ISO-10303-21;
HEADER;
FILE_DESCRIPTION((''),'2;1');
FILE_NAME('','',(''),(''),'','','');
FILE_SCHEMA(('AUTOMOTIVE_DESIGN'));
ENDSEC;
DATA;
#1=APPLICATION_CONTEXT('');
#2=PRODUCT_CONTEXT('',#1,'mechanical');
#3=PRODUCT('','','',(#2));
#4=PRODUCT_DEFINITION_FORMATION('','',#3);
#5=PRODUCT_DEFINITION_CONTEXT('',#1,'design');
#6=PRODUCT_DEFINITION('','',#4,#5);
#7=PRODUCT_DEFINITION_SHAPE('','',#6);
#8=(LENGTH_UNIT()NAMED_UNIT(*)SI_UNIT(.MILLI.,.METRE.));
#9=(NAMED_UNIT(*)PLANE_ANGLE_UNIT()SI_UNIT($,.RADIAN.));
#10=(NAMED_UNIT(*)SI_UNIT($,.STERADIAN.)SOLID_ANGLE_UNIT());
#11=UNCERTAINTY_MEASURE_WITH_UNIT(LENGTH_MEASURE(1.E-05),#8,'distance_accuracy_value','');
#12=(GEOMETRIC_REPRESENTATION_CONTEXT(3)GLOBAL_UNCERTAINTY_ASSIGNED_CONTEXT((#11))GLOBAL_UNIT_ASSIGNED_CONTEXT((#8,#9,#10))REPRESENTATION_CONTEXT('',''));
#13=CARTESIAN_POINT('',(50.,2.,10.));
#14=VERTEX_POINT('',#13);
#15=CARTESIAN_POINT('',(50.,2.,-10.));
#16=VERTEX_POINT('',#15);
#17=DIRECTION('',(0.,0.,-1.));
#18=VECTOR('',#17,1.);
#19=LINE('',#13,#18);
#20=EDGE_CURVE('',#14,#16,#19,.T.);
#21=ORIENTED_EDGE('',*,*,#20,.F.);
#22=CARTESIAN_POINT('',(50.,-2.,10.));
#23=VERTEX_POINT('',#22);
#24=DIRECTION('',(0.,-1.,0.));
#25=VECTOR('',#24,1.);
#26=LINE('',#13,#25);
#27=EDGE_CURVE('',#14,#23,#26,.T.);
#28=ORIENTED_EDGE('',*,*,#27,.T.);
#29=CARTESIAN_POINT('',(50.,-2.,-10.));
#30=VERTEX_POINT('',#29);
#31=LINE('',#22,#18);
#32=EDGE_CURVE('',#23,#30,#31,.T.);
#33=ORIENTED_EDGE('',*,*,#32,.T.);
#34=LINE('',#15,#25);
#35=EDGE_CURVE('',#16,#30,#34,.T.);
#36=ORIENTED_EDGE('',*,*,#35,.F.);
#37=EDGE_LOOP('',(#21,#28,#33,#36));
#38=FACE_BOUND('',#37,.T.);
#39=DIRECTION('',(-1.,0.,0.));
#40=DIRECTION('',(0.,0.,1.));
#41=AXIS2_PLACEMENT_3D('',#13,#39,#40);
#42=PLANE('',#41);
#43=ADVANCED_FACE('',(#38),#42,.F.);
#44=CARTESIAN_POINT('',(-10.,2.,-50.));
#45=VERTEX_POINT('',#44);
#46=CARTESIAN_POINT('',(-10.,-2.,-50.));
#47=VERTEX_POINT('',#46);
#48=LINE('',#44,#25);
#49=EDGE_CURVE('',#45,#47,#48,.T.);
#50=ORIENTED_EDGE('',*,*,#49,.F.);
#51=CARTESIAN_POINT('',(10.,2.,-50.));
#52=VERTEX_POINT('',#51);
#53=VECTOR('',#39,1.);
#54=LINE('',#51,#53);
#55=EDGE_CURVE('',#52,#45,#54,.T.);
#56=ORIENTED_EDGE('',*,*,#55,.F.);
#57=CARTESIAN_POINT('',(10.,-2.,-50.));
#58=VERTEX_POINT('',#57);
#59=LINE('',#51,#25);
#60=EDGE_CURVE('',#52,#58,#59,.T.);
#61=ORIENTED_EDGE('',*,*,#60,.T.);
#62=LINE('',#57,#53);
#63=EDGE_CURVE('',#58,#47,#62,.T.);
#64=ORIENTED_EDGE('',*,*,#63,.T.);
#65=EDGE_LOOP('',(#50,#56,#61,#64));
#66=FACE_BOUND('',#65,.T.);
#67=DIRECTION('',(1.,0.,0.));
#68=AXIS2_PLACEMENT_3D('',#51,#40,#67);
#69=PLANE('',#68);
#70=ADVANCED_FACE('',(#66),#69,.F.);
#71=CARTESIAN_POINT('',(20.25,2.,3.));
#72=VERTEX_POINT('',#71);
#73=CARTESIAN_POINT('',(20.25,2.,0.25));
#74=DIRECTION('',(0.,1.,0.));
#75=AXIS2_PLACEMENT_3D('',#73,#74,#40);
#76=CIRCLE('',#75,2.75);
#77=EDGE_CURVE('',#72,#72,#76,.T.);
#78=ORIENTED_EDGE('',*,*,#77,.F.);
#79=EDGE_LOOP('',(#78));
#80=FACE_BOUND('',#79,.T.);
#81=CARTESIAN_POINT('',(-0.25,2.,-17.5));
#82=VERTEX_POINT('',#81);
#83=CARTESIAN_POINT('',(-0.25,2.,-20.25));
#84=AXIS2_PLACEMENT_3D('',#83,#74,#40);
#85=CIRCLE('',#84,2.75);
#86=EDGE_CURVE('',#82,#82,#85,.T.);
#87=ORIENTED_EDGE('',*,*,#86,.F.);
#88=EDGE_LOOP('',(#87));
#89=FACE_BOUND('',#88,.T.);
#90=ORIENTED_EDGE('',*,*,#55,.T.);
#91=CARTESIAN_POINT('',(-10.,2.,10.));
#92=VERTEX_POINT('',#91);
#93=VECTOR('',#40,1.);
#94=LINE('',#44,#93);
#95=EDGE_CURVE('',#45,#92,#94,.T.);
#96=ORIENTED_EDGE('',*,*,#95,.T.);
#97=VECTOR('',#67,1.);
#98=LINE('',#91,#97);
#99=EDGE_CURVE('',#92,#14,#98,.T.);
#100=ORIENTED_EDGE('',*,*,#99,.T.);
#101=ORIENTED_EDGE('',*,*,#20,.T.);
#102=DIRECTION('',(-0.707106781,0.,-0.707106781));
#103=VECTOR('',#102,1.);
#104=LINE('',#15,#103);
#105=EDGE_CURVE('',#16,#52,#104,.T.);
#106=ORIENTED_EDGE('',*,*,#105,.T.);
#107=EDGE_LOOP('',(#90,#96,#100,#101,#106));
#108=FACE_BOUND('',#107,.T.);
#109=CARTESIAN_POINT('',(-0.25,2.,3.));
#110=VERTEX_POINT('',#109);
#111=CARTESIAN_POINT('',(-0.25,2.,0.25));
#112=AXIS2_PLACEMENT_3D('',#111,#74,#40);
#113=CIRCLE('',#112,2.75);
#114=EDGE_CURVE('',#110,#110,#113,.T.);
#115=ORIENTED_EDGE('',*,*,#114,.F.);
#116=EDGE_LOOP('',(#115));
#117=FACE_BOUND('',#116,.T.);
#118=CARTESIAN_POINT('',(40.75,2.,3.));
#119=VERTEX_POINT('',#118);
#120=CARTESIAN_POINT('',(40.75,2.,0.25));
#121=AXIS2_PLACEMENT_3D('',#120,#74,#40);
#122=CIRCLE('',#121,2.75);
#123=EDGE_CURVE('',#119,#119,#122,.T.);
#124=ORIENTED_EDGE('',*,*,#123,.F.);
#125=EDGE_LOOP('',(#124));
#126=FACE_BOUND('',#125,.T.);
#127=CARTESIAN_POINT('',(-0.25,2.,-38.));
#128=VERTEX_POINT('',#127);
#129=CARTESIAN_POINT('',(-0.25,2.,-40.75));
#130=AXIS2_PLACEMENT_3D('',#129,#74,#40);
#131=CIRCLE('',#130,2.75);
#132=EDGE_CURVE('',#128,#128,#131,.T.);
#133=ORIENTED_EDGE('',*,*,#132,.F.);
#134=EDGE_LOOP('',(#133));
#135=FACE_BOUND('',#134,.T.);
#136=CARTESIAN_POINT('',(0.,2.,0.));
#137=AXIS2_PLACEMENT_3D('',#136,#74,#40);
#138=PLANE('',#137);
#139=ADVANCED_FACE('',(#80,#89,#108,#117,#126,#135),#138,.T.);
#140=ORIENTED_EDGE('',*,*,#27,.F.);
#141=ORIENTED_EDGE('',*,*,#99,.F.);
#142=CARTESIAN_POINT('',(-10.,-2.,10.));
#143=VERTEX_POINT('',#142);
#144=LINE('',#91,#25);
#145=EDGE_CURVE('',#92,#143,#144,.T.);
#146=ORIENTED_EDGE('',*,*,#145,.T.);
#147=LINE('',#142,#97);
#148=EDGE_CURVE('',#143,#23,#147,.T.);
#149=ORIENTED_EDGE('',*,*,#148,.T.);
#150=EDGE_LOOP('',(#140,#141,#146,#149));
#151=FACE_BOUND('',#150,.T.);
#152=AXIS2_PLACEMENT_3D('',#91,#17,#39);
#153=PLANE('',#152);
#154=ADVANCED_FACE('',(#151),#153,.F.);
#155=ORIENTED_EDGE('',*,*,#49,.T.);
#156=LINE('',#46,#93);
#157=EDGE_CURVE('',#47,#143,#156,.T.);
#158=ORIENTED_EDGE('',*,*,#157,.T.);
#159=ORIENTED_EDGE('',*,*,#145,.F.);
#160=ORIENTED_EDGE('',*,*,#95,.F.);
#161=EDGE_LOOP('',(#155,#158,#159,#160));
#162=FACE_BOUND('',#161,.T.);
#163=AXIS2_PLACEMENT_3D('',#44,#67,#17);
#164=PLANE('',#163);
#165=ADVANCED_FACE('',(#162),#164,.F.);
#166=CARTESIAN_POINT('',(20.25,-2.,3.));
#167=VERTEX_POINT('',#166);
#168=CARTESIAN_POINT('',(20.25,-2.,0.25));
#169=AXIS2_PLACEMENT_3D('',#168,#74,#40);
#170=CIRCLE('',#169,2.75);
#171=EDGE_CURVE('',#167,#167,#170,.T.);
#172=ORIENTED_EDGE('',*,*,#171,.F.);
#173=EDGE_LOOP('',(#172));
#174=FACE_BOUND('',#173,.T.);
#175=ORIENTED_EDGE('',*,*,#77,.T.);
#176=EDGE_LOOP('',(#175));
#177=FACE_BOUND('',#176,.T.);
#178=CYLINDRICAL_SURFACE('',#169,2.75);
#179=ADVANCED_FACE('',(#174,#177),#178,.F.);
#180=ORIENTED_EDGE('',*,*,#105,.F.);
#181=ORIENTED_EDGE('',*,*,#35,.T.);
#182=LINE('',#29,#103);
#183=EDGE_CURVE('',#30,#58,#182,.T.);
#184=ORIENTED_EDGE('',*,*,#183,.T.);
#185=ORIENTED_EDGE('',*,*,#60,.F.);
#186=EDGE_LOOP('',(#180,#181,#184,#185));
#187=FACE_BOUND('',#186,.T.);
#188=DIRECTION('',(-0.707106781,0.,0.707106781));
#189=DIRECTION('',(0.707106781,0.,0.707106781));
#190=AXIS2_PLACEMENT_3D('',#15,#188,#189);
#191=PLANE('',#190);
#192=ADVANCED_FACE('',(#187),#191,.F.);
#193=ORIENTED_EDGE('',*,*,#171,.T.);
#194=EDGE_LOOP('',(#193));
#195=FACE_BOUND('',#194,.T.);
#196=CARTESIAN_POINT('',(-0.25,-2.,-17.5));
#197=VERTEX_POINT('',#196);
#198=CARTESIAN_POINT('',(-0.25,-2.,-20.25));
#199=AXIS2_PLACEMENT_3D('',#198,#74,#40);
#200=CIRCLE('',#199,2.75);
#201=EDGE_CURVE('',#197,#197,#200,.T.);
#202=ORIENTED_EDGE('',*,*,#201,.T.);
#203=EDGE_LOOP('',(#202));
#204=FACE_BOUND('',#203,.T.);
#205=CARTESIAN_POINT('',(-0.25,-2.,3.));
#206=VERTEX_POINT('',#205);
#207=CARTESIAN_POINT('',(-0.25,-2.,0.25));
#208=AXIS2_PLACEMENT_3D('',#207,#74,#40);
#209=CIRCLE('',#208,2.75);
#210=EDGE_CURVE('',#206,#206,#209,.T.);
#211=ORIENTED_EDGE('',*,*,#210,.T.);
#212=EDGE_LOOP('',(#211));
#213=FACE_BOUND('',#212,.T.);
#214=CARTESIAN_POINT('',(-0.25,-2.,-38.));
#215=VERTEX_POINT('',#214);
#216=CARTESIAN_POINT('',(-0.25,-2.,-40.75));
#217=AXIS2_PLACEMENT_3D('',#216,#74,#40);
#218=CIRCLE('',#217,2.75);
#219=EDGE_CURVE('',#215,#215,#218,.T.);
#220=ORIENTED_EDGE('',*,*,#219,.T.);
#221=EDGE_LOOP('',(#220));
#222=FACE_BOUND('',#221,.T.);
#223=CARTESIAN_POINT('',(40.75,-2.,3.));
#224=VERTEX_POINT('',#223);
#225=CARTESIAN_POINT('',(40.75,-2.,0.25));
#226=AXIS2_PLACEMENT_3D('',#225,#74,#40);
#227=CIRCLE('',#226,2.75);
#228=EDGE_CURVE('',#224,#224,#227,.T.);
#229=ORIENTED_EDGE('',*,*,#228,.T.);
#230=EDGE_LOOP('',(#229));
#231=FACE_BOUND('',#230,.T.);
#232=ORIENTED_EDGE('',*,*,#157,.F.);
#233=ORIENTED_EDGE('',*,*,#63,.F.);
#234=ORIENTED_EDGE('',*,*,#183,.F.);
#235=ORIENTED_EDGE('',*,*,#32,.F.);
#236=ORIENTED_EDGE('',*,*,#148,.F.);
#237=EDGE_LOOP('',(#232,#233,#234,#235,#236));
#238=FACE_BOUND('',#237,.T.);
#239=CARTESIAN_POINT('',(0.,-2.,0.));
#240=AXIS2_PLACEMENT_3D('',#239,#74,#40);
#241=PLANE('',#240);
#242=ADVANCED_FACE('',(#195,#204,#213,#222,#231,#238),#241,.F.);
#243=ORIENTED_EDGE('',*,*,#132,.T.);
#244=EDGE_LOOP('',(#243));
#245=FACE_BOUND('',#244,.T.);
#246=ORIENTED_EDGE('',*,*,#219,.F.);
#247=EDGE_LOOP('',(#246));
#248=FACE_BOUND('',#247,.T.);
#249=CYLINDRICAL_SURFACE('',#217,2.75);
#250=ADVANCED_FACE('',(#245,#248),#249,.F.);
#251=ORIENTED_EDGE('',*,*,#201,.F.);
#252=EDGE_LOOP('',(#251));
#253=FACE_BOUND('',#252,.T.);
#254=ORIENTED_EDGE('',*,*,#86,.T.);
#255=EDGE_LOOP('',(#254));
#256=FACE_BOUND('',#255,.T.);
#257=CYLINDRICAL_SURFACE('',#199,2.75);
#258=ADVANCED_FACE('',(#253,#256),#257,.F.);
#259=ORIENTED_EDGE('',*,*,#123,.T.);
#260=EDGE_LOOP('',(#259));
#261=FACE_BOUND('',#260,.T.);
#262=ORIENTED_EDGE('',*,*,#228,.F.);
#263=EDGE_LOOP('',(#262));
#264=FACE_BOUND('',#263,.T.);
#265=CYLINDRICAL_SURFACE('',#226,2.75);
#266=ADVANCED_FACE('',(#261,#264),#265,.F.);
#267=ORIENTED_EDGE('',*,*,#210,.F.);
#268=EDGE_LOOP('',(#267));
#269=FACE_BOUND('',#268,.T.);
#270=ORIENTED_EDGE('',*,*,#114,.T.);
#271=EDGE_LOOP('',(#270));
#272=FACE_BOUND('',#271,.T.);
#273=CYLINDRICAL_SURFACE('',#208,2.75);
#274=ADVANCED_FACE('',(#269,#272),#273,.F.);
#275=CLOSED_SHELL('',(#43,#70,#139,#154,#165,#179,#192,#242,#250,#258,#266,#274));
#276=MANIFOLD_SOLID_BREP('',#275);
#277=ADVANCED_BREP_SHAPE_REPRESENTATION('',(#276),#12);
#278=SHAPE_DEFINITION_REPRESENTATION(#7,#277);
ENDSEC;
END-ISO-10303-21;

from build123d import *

# Parameters (mm, degrees)
BOSS_EXTRUDE1_DEPTH  = 2
SKETCH3_R            = 2.75
CUT_EXTRUDE1_DEPTH   = 71.823724839
LPATTERN1_COUNT      = 3
LPATTERN1_PITCH      = 20.5
LPATTERN1_COUNT_DIR2 = 3
LPATTERN1_PITCH_DIR2 = 20.5


with BuildPart() as part:
    # Sketch2 → Boss-Extrude1 (new, symmetric)
    with BuildSketch(Plane(origin=(0, 0, 0), x_dir=(1, 0, 0), z_dir=(0, 1, 0))):
        Polygon((-10, -10), (50, -10), (50, 10), (10, 50), (-10, 50), align=None)
    extrude(amount=BOSS_EXTRUDE1_DEPTH, both=True)

    # Sketch3 → Cut-Extrude1 (cut, symmetric)
    with BuildSketch(Plane(origin=(0, 2, 0), x_dir=(1, 0, 0), z_dir=(0, 1, 0))):
        with Locations((-0.25, -0.25)):
            Circle(SKETCH3_R)
    cut_extrude1 = extrude(amount=CUT_EXTRUDE1_DEPTH, both=True, mode=Mode.SUBTRACT)

    # LPattern1: Cut-Extrude1 3 × 3, 4 skipped
    with Locations(*[(j * LPATTERN1_PITCH_DIR2, 0, -i * LPATTERN1_PITCH) for i in range(LPATTERN1_COUNT) for j in range(LPATTERN1_COUNT_DIR2) if (i, j) not in ((0, 0), (1, 1), (1, 2), (2, 1), (2, 2))]):
        add(cut_extrude1, mode=Mode.SUBTRACT)


solid = part.part
